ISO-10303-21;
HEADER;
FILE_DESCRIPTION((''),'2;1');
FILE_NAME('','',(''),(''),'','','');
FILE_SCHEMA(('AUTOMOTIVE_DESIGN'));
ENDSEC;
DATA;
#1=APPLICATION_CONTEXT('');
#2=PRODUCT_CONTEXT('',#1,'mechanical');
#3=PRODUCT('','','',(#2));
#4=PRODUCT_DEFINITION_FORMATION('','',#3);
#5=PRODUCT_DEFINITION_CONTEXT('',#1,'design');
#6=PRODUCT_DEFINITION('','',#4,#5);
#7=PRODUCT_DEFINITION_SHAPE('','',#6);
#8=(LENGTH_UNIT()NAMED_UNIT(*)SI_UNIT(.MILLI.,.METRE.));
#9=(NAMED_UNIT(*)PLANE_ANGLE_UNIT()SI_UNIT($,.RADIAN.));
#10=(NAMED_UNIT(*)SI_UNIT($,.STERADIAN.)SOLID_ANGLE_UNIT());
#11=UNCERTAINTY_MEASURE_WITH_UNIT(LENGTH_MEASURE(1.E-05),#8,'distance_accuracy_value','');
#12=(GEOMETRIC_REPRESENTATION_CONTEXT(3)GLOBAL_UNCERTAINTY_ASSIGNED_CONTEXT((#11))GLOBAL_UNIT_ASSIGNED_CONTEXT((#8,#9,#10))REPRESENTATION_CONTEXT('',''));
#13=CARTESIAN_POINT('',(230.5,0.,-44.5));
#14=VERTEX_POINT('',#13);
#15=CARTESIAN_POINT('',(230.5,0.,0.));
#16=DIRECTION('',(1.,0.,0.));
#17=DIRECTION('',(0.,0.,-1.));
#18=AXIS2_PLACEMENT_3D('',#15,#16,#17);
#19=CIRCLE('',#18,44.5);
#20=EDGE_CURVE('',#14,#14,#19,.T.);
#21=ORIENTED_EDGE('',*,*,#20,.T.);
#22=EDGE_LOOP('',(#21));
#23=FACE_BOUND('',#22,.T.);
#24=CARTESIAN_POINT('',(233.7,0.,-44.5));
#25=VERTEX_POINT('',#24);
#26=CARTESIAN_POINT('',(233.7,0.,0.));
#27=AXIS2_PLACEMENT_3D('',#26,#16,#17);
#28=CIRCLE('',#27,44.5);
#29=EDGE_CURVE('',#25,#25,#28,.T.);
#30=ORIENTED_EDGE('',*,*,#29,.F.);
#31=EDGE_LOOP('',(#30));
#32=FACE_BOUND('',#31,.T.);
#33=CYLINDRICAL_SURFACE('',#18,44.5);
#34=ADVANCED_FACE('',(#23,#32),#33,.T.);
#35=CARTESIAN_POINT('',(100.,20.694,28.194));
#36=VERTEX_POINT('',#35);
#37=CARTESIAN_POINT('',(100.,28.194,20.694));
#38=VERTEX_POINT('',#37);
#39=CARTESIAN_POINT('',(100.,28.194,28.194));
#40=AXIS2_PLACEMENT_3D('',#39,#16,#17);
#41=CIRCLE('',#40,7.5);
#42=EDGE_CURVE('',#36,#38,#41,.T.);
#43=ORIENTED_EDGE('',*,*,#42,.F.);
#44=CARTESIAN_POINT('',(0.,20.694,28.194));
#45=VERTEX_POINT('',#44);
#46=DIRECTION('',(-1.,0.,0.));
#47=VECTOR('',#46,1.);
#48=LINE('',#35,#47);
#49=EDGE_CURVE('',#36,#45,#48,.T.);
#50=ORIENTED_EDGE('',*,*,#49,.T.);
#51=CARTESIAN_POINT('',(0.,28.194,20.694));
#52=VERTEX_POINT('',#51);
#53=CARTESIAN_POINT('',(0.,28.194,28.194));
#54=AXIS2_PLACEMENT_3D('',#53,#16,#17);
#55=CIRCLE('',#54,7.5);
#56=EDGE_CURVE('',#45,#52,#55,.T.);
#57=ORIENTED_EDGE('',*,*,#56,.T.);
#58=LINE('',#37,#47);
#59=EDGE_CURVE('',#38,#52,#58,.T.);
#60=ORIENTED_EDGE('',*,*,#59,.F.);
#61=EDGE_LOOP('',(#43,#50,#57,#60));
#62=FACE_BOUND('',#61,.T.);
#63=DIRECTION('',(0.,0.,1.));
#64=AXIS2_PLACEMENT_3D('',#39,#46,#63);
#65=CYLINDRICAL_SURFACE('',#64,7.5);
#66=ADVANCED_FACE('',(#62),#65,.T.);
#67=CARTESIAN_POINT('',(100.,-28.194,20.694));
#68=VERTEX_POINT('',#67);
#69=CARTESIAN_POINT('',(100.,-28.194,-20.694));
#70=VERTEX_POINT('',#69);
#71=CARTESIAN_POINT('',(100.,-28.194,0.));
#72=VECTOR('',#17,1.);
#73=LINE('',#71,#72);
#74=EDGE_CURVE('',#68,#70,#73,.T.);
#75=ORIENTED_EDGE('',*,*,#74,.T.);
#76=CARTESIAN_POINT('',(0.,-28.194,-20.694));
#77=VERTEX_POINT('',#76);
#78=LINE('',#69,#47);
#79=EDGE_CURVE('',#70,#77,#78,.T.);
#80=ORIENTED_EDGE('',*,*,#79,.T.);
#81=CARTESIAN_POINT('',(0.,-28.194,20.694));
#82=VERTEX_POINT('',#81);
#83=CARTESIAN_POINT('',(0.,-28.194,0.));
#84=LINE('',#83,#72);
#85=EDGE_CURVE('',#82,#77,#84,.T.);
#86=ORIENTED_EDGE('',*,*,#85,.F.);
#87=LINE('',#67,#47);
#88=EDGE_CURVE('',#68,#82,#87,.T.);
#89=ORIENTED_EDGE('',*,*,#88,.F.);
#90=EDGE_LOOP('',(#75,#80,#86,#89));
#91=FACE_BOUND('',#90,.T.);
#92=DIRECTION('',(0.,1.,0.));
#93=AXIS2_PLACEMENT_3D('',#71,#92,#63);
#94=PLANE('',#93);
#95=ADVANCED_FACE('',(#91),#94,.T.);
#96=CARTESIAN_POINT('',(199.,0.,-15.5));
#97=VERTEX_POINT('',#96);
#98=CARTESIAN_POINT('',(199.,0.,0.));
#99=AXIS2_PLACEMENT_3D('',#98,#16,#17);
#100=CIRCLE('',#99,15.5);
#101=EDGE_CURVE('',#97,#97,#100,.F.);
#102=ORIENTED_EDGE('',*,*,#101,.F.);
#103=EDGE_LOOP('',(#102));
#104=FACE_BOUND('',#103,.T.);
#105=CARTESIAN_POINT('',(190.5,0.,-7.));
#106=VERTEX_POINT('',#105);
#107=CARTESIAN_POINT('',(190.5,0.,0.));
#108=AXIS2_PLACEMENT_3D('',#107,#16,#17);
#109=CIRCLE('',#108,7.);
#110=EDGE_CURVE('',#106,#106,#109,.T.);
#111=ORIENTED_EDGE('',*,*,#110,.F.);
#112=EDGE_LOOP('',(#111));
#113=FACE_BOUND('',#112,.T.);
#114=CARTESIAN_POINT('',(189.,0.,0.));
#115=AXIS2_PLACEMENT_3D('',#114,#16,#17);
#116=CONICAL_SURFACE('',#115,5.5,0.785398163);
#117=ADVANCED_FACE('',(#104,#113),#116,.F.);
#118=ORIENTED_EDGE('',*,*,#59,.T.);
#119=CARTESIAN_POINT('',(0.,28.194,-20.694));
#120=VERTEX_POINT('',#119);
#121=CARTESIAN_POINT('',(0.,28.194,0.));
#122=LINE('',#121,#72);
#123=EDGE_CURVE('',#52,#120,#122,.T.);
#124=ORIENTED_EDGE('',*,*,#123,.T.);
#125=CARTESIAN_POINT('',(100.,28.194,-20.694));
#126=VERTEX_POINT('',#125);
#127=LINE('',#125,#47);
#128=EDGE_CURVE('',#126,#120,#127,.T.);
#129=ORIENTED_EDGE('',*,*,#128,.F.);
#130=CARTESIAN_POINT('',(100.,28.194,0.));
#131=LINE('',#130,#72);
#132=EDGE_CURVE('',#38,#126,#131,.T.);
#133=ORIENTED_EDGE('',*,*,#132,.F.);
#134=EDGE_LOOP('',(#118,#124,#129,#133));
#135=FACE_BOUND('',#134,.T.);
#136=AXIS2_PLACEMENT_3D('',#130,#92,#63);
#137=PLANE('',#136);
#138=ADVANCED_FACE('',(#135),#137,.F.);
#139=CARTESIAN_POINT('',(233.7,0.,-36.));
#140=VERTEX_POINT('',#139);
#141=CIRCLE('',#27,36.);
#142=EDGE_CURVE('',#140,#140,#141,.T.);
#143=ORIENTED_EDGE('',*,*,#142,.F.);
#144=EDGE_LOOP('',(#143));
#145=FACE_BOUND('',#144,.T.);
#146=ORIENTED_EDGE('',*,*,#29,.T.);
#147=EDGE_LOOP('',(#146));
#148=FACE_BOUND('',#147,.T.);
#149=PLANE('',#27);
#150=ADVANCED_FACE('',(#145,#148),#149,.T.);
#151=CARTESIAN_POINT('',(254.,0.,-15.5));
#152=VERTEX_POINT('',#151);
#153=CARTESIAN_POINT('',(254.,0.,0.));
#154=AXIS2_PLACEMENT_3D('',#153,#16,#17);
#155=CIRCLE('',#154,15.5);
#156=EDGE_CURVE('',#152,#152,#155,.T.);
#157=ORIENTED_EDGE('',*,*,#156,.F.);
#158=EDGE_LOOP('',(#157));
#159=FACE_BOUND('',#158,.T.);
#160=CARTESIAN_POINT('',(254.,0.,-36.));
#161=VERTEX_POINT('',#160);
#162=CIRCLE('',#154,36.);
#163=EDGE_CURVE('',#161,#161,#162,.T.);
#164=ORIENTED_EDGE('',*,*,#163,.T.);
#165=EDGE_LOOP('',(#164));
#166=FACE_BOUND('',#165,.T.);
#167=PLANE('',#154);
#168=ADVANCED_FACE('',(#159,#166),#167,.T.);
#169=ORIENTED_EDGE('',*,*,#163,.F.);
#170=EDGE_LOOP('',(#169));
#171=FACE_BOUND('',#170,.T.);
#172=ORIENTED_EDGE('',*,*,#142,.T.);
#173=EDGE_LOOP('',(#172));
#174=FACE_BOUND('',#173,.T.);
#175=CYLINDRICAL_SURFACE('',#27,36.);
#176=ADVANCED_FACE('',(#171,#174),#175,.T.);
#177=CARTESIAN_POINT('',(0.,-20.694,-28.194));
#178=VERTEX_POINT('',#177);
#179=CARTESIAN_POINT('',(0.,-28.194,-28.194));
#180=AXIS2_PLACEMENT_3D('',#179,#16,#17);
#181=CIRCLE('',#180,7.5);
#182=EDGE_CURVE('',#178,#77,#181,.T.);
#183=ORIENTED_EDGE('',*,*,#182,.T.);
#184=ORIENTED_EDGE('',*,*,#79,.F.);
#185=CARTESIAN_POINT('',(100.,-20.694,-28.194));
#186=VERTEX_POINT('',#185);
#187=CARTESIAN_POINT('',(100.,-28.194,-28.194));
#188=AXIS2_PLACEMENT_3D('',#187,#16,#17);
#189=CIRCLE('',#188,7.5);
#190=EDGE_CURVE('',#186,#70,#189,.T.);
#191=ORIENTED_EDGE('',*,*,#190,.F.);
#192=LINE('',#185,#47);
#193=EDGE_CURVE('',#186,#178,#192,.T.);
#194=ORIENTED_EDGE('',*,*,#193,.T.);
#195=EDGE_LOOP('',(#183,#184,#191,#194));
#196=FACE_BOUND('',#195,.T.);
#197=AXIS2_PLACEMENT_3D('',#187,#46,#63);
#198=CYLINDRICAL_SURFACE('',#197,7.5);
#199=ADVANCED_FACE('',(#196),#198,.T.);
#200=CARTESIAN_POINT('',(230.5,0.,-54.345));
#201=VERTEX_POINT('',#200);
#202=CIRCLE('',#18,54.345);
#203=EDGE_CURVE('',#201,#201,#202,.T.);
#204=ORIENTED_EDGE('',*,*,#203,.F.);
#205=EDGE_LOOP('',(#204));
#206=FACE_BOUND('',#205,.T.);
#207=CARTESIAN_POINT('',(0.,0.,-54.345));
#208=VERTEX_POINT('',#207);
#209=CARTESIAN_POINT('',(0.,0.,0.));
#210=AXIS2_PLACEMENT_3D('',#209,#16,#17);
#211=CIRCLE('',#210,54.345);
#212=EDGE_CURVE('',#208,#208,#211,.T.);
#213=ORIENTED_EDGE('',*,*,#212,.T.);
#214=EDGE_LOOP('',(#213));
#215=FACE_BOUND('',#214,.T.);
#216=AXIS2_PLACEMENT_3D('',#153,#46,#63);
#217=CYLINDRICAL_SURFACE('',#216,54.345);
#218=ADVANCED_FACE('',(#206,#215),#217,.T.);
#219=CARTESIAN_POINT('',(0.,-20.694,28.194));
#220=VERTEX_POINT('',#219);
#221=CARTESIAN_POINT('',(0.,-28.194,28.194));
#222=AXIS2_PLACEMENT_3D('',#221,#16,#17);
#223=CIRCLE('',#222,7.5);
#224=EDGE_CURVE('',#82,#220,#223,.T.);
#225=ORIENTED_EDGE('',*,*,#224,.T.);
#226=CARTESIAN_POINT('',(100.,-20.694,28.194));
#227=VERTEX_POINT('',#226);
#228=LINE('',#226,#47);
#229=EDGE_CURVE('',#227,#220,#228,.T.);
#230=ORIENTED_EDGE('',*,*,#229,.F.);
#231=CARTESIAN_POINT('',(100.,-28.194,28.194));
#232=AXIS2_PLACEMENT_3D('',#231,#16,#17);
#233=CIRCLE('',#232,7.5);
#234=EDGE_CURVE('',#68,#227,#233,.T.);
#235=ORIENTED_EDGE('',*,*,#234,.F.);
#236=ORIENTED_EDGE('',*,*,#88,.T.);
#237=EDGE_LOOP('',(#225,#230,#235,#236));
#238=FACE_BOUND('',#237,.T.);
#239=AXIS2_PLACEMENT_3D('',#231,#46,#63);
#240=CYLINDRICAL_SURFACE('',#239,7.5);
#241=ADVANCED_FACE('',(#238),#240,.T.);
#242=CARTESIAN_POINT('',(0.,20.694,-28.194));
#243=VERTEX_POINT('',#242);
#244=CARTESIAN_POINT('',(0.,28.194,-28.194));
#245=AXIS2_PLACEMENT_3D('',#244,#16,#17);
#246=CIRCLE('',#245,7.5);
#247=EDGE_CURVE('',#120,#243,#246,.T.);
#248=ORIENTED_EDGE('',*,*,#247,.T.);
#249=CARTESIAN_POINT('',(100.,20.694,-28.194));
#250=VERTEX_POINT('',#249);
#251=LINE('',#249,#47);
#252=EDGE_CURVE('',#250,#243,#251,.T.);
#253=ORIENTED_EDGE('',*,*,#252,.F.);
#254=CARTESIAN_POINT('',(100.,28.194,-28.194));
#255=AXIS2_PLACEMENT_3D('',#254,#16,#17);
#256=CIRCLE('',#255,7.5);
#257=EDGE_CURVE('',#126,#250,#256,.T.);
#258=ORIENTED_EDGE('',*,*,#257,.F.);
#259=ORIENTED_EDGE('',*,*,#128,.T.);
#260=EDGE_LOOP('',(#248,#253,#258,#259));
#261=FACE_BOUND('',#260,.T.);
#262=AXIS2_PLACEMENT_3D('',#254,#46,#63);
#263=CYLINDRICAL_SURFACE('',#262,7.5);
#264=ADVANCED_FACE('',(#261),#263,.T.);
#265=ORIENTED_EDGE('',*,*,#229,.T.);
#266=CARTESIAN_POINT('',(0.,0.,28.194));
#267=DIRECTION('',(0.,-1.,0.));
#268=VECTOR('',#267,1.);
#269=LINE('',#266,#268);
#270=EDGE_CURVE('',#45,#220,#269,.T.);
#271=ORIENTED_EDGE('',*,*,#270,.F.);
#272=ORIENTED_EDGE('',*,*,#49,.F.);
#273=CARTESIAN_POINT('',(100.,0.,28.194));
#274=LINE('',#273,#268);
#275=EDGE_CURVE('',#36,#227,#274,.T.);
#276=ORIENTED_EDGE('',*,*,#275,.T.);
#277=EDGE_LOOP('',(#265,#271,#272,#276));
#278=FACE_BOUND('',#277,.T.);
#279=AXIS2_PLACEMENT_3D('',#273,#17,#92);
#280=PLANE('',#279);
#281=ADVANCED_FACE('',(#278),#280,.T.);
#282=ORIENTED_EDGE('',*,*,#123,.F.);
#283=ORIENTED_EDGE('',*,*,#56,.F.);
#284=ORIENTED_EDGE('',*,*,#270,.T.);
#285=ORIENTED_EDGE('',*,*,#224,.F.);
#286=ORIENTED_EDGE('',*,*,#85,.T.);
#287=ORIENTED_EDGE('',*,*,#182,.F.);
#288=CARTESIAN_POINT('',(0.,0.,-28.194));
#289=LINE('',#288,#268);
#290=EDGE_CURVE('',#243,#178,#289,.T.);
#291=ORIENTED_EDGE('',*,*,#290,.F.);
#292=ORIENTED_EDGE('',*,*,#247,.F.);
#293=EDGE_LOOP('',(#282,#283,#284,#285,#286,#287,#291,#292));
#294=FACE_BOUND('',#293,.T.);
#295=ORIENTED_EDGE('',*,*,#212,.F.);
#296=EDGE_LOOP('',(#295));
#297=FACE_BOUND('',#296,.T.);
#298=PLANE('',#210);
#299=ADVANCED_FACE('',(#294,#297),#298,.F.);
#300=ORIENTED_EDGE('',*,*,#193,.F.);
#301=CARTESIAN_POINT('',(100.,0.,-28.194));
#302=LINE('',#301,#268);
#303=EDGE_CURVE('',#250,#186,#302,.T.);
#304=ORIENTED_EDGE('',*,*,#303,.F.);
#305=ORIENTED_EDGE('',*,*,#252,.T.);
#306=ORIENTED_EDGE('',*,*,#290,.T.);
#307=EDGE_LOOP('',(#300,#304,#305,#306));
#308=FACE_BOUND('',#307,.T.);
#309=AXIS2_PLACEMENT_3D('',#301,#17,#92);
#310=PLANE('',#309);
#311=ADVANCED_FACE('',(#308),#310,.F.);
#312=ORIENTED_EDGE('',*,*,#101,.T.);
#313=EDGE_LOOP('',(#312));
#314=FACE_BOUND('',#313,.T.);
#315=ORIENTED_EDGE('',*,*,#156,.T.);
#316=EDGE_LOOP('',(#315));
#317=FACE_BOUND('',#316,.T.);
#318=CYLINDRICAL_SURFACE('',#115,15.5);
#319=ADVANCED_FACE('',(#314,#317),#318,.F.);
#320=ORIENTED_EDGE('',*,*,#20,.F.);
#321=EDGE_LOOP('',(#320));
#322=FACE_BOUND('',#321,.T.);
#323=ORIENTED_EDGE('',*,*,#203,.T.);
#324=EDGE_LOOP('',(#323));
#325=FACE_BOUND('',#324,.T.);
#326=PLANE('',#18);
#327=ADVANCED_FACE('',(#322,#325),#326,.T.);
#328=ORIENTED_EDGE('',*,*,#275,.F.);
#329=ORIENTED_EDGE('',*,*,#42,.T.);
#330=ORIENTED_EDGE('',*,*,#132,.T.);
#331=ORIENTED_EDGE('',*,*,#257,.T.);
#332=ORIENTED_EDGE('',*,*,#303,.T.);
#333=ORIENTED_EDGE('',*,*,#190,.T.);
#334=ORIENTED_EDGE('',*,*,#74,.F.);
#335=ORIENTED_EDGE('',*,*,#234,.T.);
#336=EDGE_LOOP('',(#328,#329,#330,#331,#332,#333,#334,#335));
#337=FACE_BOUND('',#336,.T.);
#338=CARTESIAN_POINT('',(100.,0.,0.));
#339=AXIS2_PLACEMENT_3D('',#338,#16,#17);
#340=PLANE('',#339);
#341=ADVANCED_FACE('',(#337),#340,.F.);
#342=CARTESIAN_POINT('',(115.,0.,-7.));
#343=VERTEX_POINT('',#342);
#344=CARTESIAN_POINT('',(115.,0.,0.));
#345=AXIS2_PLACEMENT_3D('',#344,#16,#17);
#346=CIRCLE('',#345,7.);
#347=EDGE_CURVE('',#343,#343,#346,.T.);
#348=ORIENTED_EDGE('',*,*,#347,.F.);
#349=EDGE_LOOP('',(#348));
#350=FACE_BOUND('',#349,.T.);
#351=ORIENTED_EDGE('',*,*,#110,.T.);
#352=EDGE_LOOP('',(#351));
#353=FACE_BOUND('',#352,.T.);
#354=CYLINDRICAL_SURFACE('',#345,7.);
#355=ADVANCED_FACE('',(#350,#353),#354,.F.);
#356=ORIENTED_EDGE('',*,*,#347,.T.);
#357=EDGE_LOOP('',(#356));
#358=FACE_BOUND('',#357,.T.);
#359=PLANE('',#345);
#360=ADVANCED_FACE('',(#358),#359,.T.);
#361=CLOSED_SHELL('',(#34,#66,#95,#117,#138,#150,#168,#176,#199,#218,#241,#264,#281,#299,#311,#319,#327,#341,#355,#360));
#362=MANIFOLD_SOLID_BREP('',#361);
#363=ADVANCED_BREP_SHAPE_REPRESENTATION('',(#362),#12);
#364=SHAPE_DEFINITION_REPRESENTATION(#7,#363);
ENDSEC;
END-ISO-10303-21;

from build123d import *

# Parameters (mm, degrees)
SKETCH1_R           = 54.345
BOSS_EXTRUDE1_DEPTH = 254
CUT_EXTRUDE1_DEPTH  = 100
SKETCH3_R           = 7
CUT_EXTRUDE2_DEPTH  = 139
SKETCH3_4_R         = 15.5
SKETCH3_4_R_2       = 7
CUT_EXTRUDE3_DEPTH  = 65
CUT_EXTRUDE4_START  = -23.5
SKETCH3_6_R         = 54.345
SKETCH3_6_R_2       = 44.5
CUT_EXTRUDE4_DEPTH  = 23.5
CUT_EXTRUDE5_START  = -20.3
SKETCH3_7_R         = 44.5
SKETCH3_7_R_2       = 36
CUT_EXTRUDE5_DEPTH  = 20.3
CHAMFER1_SIZE       = 10


with BuildPart() as part:
    # Sketch1 → Boss-Extrude1 (new body)
    with BuildSketch(Plane(origin=(0, 0, 0), x_dir=(0, 0, -1), z_dir=(1, 0, 0))):
        Circle(SKETCH1_R)
    extrude(amount=BOSS_EXTRUDE1_DEPTH)

    # Sketch2 → Cut-Extrude1 (cut)
    with BuildSketch(Plane(origin=(0, 0, 0), x_dir=(0, 0, -1), z_dir=(1, 0, 0))):
        with BuildLine():
            Line((20.694, 28.194), (-20.694, 28.194))
            ThreePointArc((-20.694, 28.194), (-22.890699141, 22.890699141), (-28.194, 20.694))
            Line((-28.194, 20.694), (-28.194, -20.694))
            ThreePointArc((-28.194, -20.694), (-22.890699141, -22.890699141), (-20.694, -28.194))
            Line((-20.694, -28.194), (20.694, -28.194))
            ThreePointArc((20.694, -28.194), (22.890699141, -22.890699141), (28.194, -20.694))
            Line((28.194, -20.694), (28.194, 20.694))
            ThreePointArc((28.194, 20.694), (22.890699141, 22.890699141), (20.694, 28.194))
        make_face()
    extrude(amount=CUT_EXTRUDE1_DEPTH, mode=Mode.SUBTRACT)

    # Sketch3 → Cut-Extrude2 (cut)
    with BuildSketch(Plane(origin=(254, 0, 0), x_dir=(0, 0, -1), z_dir=(1, 0, 0))):
        Circle(SKETCH3_R)
    extrude(amount=-CUT_EXTRUDE2_DEPTH, mode=Mode.SUBTRACT)

    # Sketch3<4> → Cut-Extrude3 (cut)
    with BuildSketch(Plane(origin=(254, 0, 0), x_dir=(0, 0, -1), z_dir=(1, 0, 0))):
        Circle(SKETCH3_4_R)
        Circle(SKETCH3_4_R_2, mode=Mode.SUBTRACT)
    extrude(amount=-CUT_EXTRUDE3_DEPTH, mode=Mode.SUBTRACT)

    # Sketch3<6> → Cut-Extrude4 (cut)
    with BuildSketch(Plane(origin=(254, 0, 0), x_dir=(0, 0, -1), z_dir=(1, 0, 0)).offset(CUT_EXTRUDE4_START)):
        Circle(SKETCH3_6_R)
        Circle(SKETCH3_6_R_2, mode=Mode.SUBTRACT)
    extrude(amount=CUT_EXTRUDE4_DEPTH, mode=Mode.SUBTRACT)

    # Sketch3<7> → Cut-Extrude5 (cut)
    with BuildSketch(Plane(origin=(254, 0, 0), x_dir=(0, 0, -1), z_dir=(1, 0, 0)).offset(CUT_EXTRUDE5_START)):
        Circle(SKETCH3_7_R)
        Circle(SKETCH3_7_R_2, mode=Mode.SUBTRACT)
    extrude(amount=CUT_EXTRUDE5_DEPTH, mode=Mode.SUBTRACT)

    # Chamfer1
    # the kernel refuses this chamfer: 10 mm, written as the material it adds along each edge
    with BuildSketch(Plane(origin=(189, 0, 0), x_dir=(0, 0, -1), z_dir=(0, -1, 0))) as chamfer1_piece_1_section:
        Polygon((15.5, CHAMFER1_SIZE), (15.5 - CHAMFER1_SIZE, 0), (15.5, 0), align=None)
    chamfer1_piece_1 = revolve(axis=Axis((189, 0, 0), (1, 0, 0)), mode=Mode.PRIVATE)
    chamfer1_piece_1 = chamfer1_piece_1 - Plane(origin=(194.777828899, 0, 0), x_dir=(0, 0, -1), z_dir=(1, 0, 0)) * Cylinder(7, 62, mode=Mode.PRIVATE)
    add(chamfer1_piece_1)


solid = part.part
